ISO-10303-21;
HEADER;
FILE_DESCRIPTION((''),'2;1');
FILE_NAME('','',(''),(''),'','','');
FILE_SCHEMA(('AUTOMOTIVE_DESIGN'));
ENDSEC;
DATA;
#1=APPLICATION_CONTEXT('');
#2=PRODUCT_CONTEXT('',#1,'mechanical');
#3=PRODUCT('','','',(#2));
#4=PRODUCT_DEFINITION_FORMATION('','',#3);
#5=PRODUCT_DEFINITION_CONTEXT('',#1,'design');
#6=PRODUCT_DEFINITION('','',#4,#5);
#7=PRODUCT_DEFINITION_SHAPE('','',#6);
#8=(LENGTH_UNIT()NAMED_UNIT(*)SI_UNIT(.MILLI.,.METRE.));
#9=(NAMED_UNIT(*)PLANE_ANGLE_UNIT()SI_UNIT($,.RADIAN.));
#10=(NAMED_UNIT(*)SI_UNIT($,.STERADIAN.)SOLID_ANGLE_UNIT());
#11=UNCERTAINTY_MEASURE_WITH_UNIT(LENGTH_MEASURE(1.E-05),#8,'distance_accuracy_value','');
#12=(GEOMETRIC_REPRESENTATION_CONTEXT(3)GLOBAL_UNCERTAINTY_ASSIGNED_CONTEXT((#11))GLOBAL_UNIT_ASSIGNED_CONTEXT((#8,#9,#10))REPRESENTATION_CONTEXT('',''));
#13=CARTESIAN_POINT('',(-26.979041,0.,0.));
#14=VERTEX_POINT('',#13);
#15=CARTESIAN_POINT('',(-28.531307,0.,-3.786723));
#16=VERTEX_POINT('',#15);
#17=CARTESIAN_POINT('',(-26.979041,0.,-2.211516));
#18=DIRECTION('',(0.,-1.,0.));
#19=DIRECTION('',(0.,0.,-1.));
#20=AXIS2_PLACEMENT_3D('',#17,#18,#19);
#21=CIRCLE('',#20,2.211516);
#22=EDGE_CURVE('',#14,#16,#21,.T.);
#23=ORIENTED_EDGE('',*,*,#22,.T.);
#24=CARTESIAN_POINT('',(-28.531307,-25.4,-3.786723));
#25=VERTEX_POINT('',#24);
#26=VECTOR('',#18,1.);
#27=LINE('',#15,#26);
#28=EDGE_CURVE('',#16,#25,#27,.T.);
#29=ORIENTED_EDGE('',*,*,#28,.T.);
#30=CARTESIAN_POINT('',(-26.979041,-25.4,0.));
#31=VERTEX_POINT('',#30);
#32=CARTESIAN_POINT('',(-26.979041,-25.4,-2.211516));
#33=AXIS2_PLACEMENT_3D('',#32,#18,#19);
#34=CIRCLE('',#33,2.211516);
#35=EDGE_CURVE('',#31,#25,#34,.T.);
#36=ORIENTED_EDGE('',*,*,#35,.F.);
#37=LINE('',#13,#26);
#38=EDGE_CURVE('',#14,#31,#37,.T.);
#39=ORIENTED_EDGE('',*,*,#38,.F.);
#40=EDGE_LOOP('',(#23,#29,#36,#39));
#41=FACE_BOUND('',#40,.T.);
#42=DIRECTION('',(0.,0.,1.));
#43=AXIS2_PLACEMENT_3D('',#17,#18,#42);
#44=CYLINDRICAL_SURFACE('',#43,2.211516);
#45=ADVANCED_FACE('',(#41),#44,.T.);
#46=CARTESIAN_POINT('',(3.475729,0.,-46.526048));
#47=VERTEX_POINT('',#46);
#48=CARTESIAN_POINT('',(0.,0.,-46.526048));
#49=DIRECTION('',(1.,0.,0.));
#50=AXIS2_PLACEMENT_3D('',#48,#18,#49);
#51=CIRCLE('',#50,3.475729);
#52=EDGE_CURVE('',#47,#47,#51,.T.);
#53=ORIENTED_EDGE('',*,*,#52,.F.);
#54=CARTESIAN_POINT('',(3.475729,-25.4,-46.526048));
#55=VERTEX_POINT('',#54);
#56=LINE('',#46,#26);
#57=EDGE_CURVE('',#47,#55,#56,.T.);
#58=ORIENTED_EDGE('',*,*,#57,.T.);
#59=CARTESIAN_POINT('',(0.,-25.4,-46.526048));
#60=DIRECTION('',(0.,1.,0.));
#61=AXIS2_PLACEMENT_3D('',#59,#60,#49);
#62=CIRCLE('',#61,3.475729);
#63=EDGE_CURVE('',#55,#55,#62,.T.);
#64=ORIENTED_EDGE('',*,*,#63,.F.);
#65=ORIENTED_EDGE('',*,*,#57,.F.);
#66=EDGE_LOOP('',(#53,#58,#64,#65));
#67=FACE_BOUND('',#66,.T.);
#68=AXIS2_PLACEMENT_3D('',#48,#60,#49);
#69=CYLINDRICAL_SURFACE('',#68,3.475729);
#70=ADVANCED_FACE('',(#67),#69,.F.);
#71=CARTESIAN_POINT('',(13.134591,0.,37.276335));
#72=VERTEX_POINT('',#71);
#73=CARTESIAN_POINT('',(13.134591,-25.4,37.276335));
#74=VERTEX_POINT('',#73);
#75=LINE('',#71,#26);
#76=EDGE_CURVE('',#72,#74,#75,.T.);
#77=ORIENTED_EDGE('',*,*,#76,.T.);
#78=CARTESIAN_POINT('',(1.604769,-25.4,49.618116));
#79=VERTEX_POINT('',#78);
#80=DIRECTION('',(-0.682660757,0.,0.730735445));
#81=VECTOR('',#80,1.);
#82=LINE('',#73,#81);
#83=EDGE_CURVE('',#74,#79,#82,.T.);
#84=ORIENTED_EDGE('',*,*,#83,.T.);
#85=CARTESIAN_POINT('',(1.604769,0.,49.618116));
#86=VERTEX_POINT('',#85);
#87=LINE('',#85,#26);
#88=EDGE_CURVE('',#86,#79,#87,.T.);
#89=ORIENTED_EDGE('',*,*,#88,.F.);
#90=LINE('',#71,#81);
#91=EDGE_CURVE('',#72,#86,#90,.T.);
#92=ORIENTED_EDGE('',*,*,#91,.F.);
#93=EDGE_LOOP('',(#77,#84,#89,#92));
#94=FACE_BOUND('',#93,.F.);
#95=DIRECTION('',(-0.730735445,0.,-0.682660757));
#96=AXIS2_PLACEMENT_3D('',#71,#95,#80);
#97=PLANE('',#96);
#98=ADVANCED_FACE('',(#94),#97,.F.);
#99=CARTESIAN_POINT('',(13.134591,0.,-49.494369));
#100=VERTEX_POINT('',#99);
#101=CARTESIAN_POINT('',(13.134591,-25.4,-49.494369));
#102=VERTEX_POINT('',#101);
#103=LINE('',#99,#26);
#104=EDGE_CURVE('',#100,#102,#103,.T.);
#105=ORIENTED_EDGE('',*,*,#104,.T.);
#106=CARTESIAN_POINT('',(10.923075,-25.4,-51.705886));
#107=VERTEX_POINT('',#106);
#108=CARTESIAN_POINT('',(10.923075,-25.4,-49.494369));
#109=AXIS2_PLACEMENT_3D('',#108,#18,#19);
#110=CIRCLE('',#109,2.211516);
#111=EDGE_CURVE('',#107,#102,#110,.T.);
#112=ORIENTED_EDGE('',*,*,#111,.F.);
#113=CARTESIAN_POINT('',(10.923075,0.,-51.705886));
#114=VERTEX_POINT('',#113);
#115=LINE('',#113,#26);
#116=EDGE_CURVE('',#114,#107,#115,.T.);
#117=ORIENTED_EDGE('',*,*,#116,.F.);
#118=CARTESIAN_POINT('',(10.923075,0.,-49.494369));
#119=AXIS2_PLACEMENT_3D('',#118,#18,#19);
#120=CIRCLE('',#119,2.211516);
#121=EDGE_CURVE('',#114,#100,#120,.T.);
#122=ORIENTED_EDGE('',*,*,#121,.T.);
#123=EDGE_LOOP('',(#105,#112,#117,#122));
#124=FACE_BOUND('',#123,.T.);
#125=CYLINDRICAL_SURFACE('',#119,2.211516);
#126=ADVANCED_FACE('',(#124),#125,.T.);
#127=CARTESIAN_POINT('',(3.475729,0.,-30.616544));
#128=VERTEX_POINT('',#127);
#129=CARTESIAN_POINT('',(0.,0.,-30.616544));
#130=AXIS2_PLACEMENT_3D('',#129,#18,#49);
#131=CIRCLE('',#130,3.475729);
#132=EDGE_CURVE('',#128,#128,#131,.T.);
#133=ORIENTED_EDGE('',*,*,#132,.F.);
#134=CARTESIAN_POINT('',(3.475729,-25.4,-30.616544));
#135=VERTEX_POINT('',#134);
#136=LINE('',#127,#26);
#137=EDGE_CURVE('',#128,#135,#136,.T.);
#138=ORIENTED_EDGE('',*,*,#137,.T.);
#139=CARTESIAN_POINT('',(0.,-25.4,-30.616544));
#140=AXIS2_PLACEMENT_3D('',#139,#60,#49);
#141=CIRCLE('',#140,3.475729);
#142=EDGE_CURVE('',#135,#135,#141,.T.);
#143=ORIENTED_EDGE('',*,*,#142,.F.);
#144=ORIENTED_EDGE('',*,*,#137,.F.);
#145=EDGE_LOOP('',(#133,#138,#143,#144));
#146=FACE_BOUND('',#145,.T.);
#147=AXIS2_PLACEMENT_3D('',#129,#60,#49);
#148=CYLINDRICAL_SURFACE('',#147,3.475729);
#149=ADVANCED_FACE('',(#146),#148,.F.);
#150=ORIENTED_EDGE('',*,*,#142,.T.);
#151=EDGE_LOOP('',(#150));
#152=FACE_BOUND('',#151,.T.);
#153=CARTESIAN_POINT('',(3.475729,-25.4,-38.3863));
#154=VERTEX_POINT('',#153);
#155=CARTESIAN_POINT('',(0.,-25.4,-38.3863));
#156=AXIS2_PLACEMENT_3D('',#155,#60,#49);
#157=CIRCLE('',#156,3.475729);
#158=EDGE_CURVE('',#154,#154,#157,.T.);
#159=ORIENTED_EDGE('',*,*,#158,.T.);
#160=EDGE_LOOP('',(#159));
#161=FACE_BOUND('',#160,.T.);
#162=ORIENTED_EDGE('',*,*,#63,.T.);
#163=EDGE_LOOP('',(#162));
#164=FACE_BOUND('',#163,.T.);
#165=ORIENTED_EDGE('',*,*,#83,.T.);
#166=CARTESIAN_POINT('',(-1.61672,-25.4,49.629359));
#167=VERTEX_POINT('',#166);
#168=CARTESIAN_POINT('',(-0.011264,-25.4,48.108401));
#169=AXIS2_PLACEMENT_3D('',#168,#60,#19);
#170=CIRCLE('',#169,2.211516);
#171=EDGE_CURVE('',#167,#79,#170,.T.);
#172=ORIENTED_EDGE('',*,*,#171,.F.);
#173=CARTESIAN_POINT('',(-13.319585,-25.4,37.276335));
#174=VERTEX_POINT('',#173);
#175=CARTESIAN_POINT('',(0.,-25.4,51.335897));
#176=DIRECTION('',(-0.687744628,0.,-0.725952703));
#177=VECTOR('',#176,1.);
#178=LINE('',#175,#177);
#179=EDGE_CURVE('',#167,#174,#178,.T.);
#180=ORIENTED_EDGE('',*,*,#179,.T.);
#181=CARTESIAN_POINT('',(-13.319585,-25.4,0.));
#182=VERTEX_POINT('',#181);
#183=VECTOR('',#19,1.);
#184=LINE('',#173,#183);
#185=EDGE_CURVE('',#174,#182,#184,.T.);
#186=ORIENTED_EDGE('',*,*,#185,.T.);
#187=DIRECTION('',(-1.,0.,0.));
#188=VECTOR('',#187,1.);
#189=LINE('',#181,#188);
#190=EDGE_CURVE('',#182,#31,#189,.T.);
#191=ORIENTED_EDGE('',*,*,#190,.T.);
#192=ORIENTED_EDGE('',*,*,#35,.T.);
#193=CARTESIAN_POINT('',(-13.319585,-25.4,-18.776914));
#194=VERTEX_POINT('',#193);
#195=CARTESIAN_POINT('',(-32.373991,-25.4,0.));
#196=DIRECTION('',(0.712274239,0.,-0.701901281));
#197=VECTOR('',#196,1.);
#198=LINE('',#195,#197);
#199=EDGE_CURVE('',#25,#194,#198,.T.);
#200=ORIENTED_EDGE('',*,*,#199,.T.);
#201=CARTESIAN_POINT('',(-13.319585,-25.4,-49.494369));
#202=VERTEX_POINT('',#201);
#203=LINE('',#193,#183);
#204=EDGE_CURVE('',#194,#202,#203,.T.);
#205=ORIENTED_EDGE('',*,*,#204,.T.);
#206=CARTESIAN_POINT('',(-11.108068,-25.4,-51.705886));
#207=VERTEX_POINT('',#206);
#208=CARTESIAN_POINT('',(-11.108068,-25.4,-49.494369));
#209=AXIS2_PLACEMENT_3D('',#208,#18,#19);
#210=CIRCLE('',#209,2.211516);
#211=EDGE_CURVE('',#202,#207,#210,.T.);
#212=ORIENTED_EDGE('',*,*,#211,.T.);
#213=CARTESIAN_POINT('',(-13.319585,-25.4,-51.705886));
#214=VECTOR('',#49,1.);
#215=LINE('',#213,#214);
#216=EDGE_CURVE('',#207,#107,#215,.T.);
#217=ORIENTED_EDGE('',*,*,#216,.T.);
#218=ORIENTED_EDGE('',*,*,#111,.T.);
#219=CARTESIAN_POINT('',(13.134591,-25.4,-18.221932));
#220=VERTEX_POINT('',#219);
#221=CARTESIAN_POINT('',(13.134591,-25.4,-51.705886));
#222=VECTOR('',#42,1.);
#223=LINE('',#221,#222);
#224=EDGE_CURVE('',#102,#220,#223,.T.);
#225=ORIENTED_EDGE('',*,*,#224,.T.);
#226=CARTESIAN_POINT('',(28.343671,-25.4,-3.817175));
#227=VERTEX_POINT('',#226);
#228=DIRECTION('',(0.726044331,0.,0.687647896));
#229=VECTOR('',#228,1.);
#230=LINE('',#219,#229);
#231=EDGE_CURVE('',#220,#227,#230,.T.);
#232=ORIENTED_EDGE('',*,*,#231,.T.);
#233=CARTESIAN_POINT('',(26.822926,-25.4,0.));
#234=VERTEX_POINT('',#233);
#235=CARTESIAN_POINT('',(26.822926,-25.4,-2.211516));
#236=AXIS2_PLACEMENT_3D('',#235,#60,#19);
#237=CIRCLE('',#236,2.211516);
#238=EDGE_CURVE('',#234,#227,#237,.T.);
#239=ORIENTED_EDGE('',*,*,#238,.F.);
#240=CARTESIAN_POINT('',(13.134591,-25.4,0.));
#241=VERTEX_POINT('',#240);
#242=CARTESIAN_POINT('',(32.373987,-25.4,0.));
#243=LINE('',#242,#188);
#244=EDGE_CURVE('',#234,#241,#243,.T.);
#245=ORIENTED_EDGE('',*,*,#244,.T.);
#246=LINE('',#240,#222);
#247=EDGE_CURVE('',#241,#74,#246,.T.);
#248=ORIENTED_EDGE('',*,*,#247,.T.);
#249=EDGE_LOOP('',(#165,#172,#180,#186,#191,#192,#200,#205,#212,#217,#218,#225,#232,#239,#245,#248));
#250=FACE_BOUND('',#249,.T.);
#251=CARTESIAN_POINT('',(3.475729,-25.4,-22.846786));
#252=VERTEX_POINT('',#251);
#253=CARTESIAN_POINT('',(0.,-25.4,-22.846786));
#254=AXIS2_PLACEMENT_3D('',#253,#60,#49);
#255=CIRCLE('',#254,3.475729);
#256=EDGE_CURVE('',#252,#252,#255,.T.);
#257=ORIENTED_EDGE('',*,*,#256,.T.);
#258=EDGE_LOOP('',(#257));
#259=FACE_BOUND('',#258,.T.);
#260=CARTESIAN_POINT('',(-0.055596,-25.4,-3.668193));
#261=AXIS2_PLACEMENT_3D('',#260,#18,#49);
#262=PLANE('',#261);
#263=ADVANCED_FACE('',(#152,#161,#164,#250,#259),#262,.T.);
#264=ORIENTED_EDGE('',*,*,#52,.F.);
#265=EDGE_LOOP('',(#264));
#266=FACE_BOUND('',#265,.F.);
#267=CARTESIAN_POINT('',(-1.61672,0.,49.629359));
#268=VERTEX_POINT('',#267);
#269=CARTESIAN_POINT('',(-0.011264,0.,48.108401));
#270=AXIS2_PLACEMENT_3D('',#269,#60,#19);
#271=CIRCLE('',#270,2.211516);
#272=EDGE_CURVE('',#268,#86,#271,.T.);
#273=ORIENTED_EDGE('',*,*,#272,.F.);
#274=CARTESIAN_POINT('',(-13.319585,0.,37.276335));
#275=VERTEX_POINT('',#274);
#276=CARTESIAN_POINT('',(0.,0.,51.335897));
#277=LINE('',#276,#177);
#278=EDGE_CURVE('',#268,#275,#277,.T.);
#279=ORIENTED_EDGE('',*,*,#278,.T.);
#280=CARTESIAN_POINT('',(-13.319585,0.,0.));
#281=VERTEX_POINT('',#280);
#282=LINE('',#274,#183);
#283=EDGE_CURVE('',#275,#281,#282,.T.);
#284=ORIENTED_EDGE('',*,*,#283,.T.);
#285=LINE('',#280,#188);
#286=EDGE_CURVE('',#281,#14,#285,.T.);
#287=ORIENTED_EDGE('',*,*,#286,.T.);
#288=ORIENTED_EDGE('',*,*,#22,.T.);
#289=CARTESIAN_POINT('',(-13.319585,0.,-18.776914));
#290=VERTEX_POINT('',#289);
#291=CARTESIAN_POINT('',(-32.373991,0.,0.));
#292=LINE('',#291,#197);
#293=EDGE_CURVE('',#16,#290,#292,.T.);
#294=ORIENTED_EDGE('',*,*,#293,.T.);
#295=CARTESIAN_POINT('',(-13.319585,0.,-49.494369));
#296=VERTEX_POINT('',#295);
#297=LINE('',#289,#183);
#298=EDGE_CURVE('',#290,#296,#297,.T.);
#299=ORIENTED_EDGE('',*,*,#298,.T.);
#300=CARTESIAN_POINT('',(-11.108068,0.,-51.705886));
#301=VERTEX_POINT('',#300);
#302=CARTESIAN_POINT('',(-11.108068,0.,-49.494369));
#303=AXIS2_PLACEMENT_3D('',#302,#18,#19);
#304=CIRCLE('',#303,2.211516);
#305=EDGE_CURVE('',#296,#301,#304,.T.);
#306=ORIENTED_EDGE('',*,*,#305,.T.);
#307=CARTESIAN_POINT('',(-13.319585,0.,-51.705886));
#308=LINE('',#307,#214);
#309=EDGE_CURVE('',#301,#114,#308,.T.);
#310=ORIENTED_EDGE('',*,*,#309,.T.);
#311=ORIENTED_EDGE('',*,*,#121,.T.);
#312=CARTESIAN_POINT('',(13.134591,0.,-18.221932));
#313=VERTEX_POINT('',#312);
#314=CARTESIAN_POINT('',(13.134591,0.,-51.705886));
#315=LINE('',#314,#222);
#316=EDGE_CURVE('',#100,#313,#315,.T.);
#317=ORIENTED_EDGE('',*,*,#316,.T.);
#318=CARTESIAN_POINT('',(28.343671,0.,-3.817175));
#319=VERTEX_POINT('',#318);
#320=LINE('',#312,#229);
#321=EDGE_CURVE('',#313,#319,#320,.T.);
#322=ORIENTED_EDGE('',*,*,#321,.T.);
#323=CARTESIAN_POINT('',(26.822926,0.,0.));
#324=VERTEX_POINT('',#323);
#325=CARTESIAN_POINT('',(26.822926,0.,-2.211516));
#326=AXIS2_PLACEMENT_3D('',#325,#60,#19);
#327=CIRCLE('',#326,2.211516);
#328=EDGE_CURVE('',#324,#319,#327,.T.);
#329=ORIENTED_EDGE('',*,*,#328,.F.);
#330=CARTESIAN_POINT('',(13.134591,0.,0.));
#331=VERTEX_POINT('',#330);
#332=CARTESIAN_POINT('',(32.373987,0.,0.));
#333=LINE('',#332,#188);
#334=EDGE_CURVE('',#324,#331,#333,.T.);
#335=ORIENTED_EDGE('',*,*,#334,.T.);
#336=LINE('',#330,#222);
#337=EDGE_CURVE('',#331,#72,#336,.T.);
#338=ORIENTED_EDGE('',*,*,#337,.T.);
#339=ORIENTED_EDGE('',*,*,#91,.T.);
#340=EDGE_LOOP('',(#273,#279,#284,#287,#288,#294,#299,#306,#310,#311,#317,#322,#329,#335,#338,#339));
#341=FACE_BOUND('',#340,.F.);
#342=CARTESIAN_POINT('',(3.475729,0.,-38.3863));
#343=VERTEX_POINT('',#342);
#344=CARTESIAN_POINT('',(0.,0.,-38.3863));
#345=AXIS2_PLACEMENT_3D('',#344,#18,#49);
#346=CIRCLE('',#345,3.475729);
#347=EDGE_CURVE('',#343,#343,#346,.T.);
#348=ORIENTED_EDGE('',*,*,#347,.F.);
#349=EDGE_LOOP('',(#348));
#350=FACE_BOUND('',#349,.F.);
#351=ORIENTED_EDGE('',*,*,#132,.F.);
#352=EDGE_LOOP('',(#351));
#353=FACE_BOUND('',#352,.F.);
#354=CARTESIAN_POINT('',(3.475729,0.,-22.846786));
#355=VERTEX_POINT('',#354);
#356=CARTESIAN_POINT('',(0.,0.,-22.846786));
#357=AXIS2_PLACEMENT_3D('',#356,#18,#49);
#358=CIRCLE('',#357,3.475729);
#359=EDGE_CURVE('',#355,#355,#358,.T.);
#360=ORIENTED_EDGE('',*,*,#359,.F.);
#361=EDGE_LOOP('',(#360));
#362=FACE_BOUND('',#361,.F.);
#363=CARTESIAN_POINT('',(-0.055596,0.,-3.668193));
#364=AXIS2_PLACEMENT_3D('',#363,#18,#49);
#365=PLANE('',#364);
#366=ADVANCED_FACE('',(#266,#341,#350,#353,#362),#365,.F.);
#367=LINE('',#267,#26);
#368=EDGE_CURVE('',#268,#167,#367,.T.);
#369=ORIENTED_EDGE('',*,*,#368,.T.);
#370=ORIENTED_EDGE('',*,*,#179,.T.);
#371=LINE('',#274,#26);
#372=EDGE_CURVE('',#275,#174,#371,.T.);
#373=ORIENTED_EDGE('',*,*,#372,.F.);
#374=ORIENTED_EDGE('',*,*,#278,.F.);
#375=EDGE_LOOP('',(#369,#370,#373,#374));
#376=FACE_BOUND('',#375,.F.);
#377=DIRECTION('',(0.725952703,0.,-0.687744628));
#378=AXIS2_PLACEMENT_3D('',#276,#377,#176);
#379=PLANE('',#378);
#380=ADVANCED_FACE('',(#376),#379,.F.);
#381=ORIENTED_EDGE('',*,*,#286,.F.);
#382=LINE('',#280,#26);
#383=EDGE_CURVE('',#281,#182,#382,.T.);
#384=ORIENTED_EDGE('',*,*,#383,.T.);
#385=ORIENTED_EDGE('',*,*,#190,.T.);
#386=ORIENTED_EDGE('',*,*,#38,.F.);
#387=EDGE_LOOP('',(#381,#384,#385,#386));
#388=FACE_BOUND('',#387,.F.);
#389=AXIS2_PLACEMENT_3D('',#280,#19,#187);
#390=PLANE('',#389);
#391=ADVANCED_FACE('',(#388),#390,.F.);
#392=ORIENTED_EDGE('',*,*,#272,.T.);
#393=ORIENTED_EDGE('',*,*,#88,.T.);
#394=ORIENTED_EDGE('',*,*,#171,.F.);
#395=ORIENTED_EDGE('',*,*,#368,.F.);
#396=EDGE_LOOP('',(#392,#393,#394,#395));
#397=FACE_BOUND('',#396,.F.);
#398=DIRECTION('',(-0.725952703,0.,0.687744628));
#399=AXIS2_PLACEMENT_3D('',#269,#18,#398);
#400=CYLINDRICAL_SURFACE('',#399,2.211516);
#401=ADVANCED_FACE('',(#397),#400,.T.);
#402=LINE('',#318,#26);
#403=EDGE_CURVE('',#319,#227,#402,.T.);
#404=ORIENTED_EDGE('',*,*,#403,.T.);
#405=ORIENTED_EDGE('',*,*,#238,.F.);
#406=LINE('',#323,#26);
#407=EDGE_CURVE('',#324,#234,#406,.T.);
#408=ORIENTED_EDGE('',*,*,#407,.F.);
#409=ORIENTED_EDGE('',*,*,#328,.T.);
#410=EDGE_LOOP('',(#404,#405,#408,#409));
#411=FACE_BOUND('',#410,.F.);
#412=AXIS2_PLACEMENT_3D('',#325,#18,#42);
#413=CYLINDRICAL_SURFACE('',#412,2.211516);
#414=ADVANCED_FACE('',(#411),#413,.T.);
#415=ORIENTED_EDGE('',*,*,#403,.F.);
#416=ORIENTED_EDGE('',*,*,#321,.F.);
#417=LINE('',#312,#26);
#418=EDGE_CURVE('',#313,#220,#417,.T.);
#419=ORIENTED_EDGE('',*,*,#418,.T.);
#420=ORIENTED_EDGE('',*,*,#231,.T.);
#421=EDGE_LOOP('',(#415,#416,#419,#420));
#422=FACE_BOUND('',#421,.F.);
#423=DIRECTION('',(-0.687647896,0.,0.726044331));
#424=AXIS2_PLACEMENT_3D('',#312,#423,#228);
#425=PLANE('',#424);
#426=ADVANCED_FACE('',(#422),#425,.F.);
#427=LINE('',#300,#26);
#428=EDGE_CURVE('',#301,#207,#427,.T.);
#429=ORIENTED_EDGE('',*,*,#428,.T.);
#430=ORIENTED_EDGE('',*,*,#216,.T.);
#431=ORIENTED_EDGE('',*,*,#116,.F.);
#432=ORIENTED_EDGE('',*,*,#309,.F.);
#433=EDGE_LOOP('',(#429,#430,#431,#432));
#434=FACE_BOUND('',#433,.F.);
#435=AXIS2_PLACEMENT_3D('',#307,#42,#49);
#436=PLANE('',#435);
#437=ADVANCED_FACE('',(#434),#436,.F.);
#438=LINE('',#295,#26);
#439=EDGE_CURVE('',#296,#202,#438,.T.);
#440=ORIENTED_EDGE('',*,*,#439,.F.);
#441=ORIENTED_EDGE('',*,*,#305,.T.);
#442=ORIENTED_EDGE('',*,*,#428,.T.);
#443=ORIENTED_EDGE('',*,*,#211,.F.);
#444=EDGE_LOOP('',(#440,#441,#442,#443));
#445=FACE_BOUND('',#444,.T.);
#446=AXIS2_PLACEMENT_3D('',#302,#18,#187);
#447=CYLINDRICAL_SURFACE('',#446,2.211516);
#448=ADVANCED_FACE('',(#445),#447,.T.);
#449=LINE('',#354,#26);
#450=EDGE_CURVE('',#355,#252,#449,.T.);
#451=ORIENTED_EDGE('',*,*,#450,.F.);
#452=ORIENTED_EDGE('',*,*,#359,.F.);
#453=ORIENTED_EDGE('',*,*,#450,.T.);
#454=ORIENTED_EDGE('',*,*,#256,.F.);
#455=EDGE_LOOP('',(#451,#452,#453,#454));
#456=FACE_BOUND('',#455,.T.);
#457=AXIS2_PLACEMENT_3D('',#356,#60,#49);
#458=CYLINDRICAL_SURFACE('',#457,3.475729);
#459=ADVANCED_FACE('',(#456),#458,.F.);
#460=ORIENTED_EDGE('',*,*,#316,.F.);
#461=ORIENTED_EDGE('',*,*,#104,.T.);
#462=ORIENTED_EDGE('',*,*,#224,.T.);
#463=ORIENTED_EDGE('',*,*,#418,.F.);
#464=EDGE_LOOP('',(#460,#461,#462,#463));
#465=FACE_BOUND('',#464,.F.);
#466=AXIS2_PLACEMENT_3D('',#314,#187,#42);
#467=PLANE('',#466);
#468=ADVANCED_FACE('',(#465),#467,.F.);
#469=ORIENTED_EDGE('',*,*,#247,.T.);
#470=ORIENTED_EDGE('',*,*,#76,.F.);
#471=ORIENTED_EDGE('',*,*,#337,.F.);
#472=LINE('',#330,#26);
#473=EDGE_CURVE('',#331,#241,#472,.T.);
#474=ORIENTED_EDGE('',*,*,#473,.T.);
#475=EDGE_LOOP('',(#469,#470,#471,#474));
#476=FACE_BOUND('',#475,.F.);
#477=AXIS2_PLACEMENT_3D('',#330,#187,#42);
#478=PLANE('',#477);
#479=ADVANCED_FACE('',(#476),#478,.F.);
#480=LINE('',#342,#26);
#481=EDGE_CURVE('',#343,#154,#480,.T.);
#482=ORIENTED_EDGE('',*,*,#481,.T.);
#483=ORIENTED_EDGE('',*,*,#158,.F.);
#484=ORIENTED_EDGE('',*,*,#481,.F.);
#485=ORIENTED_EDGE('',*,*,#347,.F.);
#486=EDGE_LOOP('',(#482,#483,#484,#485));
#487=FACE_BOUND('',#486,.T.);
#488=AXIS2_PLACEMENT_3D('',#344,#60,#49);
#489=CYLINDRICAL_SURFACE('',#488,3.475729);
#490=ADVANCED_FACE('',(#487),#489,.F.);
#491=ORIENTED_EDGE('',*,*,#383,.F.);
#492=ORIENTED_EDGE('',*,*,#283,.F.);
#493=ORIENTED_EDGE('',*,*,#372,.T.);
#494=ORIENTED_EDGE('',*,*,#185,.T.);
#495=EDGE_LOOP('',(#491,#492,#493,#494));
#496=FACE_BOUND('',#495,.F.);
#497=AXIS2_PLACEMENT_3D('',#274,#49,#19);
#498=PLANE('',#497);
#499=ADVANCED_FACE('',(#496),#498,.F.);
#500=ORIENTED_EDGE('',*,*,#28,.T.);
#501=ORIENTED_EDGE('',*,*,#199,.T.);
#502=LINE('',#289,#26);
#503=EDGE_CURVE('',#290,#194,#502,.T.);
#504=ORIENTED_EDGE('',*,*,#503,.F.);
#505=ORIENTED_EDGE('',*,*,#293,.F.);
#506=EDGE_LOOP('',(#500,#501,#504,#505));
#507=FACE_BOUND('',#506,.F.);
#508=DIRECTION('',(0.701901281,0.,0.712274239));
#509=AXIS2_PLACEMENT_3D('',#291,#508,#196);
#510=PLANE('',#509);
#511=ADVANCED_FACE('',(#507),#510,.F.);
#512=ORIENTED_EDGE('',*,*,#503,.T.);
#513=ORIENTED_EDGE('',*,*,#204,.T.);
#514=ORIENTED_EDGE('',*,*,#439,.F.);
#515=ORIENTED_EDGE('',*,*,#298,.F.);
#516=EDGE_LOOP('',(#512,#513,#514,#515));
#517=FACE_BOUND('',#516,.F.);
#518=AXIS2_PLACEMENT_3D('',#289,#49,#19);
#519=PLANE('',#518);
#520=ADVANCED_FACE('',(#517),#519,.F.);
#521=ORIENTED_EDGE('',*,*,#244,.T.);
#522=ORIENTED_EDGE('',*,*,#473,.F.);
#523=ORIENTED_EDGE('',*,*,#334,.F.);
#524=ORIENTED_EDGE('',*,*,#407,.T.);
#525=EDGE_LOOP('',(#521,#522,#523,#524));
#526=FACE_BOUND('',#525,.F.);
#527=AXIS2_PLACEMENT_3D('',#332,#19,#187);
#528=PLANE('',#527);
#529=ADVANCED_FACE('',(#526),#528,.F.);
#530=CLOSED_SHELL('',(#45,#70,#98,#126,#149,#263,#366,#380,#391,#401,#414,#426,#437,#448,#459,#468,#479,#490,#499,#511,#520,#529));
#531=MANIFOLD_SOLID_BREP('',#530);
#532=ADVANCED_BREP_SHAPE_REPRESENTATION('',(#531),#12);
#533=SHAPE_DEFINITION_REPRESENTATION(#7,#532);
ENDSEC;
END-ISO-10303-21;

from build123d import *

# Parameters (mm, degrees)
F1_DEPTH = 25.4
F2_R     = 3.4757285613
F3_DEPTH = 25.401
F6_R     = 2.2115163873


# Not quite as in the source:
# - the program builds the solid bodies; features that only make, move or delete a surface that nothing else refers to are left out


with BuildPart() as f1:
    # F0 (on Front) → F1 (new body)
    with BuildSketch(Plane.XZ):
        Polygon((-13.319584541, 37.2763350606), (-13.319584541, 0), (-32.3739908636, 0), (-13.319584541, -18.7769141048), (-13.319584541, -51.7058856785), (13.1345912814, -51.7058856785), (13.1345912814, -18.221931532), (32.3739871383, 0), (13.1345912814, 0), (13.1345912814, 37.2763350606), (0, 51.3358972967), align=None)
    extrude(amount=F1_DEPTH)

    # F2 (on Front) → F3 (cut, through all)
    with BuildSketch(Plane.XZ):
        with Locations((0, -22.8467863053)):
            Circle(F2_R)
        with Locations((0, -30.6165441871)):
            Circle(F2_R)
        with Locations((0, -38.3863002062)):
            Circle(F2_R)
        with Locations((0, -46.5260483325)):
            Circle(F2_R)
    extrude(amount=F3_DEPTH, mode=Mode.SUBTRACT)

    # F6
    f6_edges = [f1.edges().sort_by_distance(p)[0] for p in [
        (-32.373991, -12.7, 0),
        (32.373987, -12.7, 0),
        (-13.319585, -12.7, -51.705886),
        (13.134591, -12.7, -51.705886),
        (0, -12.7, 51.335897),
    ]]
    fillet(f6_edges, radius=F6_R)


solid = f1.part
